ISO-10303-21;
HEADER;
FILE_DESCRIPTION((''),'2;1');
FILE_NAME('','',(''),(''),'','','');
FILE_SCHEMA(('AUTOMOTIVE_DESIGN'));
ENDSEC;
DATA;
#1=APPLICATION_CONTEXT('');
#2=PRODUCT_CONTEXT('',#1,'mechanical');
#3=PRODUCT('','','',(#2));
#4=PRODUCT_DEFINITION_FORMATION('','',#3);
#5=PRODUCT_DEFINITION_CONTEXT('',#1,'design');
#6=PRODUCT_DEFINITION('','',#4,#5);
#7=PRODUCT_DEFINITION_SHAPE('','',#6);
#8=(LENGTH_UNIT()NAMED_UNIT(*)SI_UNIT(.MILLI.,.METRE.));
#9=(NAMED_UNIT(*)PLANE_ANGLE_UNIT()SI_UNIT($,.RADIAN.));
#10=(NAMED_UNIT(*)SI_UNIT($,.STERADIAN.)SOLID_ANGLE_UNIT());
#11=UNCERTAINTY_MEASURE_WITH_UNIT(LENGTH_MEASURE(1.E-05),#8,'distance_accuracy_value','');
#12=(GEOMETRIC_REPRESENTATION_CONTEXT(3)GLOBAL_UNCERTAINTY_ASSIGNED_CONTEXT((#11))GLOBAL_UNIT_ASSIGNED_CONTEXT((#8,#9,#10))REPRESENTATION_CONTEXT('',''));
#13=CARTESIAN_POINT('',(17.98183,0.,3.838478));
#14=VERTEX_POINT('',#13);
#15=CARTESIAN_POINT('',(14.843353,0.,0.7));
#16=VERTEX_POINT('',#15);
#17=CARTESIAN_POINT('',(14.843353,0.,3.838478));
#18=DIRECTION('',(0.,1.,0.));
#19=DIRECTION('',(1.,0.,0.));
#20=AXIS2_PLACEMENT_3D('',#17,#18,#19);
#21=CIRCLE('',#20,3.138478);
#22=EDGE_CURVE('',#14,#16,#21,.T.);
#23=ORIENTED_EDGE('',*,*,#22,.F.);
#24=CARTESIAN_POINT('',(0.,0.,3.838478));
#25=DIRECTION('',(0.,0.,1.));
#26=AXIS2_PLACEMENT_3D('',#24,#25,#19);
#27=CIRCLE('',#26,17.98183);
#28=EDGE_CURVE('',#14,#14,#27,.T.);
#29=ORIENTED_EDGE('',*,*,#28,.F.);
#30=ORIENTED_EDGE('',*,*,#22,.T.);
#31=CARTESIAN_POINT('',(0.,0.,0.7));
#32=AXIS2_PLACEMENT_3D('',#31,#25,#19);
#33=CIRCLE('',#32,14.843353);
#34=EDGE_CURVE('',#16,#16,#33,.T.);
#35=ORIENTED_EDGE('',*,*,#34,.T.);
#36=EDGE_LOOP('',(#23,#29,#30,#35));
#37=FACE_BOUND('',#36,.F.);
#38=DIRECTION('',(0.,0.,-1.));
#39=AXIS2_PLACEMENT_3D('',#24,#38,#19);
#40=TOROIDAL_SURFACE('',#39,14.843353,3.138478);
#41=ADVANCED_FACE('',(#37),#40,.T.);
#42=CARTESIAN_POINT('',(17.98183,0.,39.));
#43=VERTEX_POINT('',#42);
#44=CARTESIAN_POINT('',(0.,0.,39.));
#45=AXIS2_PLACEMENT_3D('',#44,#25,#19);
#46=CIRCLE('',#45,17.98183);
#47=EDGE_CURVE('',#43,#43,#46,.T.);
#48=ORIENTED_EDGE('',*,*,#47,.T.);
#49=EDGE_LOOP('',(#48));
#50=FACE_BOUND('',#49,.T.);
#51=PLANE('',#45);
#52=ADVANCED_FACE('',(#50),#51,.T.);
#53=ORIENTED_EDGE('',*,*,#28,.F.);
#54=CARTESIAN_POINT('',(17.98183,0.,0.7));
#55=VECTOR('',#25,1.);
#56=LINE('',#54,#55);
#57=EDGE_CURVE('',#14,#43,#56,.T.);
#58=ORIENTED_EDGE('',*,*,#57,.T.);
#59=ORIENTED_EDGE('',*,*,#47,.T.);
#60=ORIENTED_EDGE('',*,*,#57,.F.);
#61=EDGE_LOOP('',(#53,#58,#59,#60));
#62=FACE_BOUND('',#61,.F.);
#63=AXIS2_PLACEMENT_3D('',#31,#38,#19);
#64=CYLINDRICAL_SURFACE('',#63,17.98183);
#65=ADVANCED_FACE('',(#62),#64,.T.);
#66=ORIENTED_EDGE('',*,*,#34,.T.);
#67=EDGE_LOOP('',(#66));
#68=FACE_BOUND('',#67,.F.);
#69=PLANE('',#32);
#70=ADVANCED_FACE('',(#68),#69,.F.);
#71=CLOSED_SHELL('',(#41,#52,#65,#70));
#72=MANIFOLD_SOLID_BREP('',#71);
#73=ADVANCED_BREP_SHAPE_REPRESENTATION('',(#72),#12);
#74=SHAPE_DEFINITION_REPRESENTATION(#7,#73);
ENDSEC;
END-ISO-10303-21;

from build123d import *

# Parameters (mm, degrees)
F3_START = 0.7
F2_R     = 17.9818304379
F3_DEPTH = 38.3
F4_R     = 3.1384776311


# Not quite as in the source:
# - the program builds the solid bodies; features that only make, move or delete a surface that nothing else refers to are left out


with BuildPart() as f3:
    # F2 (on Top) → F3 (new body)
    with BuildSketch(Plane.XY.offset(F3_START)):
        Circle(F2_R)
    extrude(amount=F3_DEPTH)

    # F4
    f4_edges = [f3.edges().sort_by_distance(p)[0] for p in [
        (-17.98183, 0, 0.7),
    ]]
    fillet(f4_edges, radius=F4_R)


solid = f3.part
